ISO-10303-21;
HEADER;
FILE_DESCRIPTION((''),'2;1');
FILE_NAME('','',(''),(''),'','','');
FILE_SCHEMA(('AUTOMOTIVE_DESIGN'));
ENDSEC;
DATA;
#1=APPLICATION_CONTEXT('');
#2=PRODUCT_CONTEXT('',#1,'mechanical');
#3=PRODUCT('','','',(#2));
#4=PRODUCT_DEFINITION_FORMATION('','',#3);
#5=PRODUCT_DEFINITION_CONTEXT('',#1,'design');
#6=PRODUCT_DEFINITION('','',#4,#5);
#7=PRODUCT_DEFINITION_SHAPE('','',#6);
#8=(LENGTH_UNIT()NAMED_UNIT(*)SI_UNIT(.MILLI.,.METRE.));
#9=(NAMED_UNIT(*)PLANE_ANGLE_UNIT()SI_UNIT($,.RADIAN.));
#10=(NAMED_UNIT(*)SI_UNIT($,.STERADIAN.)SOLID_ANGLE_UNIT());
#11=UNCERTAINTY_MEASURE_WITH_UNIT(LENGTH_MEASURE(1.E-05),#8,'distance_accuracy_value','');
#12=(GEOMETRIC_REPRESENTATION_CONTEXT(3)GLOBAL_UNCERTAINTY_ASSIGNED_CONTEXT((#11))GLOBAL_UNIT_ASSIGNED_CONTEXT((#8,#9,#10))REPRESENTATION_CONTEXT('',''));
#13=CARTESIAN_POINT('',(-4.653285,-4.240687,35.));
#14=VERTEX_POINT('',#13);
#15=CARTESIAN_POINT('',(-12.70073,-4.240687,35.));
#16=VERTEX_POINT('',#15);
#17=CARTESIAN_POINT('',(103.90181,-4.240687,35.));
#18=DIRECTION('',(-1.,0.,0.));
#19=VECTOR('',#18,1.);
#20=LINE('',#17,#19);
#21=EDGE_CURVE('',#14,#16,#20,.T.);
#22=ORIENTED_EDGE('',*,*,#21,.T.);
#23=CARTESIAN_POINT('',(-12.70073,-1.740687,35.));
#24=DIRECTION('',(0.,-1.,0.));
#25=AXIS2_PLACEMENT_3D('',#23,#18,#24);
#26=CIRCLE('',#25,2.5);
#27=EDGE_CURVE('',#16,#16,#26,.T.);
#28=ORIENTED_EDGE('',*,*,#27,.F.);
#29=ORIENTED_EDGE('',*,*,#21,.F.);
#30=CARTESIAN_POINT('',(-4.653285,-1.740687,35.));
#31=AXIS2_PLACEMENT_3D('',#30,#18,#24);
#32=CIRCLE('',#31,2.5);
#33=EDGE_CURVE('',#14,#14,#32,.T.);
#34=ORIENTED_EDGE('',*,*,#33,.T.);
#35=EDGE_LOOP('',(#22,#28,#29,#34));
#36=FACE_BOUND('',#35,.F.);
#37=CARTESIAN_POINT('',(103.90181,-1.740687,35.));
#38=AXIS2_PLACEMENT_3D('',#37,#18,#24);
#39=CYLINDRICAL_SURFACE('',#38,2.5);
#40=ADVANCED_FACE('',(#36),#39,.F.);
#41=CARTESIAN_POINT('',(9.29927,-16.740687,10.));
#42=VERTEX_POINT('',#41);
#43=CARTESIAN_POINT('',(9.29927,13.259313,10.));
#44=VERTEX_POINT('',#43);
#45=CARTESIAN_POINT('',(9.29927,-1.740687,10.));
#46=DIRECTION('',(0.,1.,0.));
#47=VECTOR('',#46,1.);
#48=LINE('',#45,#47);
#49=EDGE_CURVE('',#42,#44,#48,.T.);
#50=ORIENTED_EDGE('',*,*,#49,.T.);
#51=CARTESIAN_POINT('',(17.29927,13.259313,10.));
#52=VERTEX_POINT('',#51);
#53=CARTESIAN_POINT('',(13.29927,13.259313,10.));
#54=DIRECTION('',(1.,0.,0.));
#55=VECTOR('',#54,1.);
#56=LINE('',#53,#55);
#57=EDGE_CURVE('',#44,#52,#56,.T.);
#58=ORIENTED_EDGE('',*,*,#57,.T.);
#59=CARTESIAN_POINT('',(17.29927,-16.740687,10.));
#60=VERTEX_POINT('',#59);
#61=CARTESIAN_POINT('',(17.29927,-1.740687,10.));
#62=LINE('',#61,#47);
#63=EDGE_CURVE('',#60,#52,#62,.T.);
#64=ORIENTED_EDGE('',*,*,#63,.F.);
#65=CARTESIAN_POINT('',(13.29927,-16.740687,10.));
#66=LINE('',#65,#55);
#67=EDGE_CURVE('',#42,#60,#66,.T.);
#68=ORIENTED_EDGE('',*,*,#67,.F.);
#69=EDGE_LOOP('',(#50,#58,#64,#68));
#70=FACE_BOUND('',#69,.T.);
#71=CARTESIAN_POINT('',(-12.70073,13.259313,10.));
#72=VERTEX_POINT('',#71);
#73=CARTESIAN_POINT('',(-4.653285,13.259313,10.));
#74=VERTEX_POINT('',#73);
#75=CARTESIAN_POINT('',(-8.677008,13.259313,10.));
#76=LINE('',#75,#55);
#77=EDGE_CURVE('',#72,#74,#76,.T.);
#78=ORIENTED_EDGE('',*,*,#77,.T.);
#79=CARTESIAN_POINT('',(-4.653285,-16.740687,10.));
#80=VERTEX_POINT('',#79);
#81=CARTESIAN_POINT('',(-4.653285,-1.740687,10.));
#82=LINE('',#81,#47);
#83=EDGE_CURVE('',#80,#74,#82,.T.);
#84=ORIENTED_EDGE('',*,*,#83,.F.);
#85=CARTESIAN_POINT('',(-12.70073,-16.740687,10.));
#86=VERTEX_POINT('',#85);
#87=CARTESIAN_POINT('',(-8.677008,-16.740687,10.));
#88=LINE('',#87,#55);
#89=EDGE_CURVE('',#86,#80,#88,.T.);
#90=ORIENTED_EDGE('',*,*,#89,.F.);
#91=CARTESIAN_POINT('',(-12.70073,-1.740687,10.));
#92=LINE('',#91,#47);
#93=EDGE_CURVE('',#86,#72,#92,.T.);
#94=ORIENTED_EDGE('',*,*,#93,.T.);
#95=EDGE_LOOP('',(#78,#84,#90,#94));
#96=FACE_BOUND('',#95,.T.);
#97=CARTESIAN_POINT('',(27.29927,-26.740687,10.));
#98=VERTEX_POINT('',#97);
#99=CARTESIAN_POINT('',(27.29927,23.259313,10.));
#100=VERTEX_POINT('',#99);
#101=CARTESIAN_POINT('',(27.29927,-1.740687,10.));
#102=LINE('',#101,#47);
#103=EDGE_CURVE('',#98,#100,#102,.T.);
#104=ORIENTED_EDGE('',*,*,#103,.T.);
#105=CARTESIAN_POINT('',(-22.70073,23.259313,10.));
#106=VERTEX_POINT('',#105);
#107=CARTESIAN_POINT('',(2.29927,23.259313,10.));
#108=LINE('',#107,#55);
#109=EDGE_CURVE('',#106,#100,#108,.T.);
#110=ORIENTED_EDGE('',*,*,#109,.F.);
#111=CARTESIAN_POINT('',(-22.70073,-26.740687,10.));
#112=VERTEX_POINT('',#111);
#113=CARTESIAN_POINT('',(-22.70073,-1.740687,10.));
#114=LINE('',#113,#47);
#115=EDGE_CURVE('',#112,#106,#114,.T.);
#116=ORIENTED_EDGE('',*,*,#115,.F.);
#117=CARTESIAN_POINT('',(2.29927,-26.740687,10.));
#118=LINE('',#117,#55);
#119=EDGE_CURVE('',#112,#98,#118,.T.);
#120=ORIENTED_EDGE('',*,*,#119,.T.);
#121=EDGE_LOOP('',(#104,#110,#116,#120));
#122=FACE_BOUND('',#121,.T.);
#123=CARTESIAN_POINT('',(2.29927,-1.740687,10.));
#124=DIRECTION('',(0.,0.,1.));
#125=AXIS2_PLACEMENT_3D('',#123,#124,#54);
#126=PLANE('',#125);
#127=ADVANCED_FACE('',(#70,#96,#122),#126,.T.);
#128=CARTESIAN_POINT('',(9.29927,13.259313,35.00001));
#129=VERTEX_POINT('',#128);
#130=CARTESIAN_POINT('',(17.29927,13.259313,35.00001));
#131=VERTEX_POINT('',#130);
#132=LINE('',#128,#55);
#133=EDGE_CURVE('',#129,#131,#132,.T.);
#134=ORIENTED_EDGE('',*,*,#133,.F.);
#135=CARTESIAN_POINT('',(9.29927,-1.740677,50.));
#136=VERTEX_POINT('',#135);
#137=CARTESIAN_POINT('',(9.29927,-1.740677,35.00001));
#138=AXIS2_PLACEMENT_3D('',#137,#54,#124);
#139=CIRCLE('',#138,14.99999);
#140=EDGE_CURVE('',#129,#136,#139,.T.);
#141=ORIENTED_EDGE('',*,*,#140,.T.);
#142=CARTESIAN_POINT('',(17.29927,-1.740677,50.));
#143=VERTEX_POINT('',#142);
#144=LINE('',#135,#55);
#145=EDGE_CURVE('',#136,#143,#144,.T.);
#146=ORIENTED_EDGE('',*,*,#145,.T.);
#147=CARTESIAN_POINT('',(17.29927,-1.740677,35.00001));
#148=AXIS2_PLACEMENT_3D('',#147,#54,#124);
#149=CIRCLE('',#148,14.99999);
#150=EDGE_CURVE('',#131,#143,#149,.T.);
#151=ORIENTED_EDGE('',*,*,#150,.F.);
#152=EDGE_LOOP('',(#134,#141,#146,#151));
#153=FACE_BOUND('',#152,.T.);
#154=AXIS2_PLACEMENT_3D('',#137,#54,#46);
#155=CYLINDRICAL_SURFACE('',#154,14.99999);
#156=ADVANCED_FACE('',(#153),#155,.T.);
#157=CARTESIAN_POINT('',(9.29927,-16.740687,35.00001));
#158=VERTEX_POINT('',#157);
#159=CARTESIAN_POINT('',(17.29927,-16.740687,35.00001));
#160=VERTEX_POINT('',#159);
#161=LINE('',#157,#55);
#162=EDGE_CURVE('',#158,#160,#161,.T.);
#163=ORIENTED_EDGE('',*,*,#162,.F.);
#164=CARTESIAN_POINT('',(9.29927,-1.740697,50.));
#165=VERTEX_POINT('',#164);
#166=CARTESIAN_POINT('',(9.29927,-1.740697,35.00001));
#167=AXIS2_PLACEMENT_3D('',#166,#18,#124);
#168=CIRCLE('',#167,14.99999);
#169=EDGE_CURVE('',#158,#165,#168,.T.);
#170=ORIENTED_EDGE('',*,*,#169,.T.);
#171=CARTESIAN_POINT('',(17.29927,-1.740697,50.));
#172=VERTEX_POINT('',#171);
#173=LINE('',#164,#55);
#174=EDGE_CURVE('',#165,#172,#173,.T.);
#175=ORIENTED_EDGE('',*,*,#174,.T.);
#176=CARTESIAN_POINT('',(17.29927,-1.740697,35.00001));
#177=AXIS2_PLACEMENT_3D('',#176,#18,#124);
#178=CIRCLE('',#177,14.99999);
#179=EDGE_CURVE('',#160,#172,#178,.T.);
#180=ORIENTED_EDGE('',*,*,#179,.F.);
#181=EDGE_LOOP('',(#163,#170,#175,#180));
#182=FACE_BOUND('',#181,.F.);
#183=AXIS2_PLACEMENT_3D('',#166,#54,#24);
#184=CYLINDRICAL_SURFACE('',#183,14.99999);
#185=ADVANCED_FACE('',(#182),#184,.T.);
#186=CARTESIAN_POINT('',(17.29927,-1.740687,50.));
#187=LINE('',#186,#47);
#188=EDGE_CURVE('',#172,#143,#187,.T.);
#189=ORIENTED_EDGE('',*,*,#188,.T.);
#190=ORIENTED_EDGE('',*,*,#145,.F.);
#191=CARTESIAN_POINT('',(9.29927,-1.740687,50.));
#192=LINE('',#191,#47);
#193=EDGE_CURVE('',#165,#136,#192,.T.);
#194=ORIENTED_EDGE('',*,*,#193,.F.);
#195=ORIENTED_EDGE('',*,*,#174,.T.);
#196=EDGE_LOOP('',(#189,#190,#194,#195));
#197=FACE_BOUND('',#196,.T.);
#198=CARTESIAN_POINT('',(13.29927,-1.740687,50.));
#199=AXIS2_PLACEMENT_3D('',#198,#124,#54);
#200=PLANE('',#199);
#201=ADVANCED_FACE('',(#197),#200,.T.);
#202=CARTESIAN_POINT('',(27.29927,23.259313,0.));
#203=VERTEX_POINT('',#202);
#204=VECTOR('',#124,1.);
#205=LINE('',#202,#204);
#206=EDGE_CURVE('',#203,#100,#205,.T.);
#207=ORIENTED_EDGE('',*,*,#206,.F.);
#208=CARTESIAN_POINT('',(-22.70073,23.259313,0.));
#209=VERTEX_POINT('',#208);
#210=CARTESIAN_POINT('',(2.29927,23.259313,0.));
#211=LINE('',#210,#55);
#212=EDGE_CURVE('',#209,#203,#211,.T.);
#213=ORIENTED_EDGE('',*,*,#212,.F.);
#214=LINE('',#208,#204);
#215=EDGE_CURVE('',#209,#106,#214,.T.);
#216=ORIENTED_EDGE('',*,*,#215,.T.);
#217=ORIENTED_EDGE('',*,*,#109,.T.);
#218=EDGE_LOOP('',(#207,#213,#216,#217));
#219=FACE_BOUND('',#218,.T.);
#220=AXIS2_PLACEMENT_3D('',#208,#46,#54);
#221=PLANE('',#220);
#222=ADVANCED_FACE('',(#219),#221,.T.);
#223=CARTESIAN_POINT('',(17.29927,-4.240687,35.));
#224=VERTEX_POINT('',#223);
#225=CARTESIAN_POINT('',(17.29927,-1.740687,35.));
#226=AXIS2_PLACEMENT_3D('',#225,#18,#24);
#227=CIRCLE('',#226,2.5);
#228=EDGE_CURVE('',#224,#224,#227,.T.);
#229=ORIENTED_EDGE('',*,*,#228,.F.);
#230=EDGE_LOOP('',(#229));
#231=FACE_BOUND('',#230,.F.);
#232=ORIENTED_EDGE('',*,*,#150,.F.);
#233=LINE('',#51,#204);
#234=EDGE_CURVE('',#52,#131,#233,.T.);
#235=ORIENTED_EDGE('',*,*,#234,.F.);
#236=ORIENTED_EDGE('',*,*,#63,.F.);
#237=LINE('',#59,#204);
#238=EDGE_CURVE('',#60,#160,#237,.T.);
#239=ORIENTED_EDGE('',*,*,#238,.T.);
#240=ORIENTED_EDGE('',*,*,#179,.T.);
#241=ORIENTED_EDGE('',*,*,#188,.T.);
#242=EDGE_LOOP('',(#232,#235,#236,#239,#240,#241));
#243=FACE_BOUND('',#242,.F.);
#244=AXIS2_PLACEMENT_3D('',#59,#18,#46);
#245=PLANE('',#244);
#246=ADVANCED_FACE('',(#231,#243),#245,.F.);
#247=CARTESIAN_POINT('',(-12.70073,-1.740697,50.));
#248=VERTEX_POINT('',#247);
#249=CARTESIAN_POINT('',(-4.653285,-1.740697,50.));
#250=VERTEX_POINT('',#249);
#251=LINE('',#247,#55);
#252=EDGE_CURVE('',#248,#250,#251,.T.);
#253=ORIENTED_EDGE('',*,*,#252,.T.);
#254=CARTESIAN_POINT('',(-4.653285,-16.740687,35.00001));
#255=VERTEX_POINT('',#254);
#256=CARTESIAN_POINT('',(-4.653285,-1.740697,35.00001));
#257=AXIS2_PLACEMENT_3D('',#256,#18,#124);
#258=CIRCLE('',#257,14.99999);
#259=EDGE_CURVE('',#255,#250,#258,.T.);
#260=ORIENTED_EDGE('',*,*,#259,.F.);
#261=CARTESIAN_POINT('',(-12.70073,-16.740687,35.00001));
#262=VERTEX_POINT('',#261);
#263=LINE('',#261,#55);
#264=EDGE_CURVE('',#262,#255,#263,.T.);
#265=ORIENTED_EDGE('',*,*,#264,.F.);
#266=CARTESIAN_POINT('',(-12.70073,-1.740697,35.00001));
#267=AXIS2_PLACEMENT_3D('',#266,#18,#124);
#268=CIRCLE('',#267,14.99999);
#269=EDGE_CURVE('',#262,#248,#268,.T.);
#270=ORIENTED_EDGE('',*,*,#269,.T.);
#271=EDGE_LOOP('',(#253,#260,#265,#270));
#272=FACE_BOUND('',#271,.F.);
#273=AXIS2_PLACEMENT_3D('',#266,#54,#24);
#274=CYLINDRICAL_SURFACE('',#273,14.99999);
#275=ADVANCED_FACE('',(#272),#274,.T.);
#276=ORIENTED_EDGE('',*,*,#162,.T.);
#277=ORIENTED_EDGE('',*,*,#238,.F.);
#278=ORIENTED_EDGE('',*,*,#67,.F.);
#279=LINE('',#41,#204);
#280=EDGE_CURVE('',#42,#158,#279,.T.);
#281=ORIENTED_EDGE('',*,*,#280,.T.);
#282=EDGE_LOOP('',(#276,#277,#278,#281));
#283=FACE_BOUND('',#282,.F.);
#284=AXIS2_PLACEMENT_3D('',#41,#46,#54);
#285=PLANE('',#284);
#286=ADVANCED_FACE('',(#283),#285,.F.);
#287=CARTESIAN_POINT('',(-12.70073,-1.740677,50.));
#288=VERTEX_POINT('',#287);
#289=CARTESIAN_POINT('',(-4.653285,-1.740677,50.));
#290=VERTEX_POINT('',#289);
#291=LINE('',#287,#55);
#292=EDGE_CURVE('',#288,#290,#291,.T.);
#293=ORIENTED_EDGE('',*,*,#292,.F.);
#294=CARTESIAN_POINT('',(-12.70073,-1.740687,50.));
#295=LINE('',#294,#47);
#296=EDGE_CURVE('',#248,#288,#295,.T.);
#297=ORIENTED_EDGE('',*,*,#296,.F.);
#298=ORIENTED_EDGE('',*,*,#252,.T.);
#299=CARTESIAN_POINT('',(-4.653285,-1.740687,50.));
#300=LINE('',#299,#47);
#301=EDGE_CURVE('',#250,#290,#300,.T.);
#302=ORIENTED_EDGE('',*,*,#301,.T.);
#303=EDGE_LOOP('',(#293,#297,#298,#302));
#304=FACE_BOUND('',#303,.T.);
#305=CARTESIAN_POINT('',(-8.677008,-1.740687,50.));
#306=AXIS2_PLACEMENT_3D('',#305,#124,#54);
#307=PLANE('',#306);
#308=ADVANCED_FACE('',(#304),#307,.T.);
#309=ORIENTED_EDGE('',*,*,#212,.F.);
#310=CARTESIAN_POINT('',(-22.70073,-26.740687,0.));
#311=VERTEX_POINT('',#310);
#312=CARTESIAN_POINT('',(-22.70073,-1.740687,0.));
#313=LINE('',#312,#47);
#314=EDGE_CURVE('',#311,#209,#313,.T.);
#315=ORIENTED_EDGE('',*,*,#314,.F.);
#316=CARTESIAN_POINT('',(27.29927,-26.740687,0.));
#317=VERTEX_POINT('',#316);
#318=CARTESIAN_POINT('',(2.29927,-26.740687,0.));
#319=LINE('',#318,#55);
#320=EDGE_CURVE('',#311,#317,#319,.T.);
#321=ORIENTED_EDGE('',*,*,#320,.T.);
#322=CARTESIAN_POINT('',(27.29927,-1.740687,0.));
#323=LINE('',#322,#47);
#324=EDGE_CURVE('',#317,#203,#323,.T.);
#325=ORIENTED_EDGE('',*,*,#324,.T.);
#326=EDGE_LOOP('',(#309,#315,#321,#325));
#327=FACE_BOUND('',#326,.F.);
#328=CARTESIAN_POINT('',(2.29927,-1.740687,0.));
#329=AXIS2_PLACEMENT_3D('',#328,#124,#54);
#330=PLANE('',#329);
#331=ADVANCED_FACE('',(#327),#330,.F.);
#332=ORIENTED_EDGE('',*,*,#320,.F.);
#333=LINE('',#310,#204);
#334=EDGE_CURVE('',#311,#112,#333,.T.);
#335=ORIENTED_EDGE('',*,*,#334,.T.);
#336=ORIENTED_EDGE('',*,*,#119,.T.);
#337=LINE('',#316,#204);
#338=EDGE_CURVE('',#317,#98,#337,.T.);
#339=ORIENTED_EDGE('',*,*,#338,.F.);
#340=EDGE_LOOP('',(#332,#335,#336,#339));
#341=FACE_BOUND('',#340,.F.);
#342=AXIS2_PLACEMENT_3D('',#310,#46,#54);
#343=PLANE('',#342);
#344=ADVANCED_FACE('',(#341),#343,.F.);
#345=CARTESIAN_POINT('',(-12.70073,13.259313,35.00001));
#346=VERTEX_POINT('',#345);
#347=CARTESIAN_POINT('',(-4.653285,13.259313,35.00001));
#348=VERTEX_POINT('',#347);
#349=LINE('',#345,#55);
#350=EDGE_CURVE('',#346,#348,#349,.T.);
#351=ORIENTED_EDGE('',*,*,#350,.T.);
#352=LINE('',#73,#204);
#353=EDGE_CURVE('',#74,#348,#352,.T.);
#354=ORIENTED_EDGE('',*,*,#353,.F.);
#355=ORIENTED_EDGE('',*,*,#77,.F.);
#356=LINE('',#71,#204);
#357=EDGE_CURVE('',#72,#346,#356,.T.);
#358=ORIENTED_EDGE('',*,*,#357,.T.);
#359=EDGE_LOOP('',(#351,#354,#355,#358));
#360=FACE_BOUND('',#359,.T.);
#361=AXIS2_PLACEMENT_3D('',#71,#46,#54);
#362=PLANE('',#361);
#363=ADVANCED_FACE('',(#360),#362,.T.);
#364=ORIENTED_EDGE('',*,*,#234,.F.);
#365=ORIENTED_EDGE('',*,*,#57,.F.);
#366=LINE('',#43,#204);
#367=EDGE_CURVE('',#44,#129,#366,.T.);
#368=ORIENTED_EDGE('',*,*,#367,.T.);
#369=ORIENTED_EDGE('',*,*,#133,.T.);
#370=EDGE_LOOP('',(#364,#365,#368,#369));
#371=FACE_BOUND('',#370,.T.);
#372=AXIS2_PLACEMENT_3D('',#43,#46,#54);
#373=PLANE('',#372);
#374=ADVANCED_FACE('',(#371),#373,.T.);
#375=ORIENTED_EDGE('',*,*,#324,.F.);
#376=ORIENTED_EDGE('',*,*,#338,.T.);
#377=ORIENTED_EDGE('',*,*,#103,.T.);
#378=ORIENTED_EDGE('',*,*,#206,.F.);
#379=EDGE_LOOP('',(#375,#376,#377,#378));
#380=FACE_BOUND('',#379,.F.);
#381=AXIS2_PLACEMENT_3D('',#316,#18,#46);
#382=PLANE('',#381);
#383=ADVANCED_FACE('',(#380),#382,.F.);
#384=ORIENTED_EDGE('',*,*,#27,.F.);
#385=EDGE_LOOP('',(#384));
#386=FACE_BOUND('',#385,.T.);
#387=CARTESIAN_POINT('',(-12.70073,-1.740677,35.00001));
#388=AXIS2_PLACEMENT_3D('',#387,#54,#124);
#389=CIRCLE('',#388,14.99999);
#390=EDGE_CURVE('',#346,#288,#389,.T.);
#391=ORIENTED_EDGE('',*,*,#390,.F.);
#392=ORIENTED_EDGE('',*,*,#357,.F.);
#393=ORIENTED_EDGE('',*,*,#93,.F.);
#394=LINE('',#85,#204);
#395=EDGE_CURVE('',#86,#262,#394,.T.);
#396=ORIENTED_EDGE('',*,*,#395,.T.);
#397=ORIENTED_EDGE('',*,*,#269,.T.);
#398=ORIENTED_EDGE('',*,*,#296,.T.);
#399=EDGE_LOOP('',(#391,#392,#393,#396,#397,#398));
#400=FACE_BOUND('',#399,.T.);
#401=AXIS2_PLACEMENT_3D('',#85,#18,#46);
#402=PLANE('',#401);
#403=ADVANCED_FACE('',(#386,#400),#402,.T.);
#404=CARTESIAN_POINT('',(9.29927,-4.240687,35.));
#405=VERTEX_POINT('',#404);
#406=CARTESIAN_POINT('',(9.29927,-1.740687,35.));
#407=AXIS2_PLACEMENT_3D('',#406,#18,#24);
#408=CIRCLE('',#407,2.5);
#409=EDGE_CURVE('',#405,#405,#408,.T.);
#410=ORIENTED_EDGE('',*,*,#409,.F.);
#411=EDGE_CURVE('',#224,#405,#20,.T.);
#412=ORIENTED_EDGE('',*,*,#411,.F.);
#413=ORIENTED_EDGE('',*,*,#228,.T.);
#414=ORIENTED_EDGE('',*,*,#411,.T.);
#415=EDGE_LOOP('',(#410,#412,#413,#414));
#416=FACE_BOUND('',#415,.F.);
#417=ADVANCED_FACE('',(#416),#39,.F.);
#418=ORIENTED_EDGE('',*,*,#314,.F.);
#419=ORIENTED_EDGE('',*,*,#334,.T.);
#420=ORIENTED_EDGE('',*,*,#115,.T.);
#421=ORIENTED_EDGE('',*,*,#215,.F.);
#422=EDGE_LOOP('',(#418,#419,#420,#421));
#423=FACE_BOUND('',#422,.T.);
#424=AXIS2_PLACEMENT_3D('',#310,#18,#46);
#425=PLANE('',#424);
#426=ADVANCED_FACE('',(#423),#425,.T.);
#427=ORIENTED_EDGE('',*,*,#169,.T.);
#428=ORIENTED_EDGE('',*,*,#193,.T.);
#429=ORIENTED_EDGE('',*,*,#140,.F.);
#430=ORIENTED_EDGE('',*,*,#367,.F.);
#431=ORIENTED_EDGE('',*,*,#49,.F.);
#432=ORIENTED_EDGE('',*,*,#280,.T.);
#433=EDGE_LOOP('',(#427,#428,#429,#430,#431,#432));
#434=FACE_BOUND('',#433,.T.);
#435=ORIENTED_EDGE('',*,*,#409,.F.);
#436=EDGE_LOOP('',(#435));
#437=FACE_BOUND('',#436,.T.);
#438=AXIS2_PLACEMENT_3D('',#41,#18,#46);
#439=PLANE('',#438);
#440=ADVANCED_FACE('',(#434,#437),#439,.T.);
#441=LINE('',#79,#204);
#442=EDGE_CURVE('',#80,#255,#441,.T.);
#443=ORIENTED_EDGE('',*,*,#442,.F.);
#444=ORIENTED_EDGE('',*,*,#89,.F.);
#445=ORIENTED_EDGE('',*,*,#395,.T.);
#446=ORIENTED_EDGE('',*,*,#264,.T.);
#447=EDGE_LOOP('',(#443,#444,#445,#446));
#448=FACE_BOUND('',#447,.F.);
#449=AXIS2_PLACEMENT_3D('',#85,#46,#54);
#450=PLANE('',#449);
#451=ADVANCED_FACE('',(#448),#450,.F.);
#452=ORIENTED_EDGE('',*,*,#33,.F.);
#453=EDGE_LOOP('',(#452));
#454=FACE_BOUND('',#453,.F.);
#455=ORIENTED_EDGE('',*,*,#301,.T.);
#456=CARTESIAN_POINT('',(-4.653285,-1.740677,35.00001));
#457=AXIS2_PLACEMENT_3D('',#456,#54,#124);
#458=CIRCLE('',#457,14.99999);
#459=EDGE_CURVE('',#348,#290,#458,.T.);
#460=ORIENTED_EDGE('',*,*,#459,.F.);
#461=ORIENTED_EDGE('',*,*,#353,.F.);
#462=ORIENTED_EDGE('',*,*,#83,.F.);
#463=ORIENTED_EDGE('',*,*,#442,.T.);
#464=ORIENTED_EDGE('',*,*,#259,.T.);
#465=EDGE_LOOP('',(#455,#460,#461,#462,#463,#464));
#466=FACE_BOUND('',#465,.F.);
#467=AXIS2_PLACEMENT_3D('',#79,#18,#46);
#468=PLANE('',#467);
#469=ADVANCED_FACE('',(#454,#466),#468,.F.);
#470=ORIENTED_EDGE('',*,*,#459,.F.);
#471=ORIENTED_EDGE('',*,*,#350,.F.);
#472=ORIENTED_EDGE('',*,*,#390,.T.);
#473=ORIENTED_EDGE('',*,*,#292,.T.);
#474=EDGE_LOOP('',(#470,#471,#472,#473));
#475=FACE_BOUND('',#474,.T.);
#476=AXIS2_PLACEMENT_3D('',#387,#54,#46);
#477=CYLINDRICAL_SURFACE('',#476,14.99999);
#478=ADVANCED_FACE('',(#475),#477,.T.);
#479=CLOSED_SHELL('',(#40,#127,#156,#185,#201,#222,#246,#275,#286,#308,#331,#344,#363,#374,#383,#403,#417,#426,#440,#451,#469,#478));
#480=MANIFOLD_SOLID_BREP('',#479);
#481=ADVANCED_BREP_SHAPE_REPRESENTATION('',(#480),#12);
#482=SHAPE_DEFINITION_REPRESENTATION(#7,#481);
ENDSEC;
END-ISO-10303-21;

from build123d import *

# Parameters (mm, degrees)
F0_W     = 50
F0_H     = 50
F1_DEPTH = 10
F2_W     = 8.0474452116
F2_H     = 30
F2_W_2   = 8
F3_DEPTH = 40
F4_R     = 14.99999
F6_D     = 5


# Not quite as in the source:
# - a fillet or chamfer is up to 0.001 mm smaller than in the source, because OpenCascade refuses the exact size


with BuildPart() as f1:
    # F0 (on Top) → F1 (new body)
    with BuildSketch(Plane.XY):
        with Locations((2.2992696613, -1.7406867517)):
            Rectangle(F0_W, F0_H)
    extrude(amount=F1_DEPTH)

    # F2 (on face) → F3 (join)
    with BuildSketch(Plane.XY.offset(10)):
        with Locations((-8.6770077329, -1.7406867517)):
            Rectangle(F2_W, F2_H)
        with Locations((13.2992696613, -1.7406867517)):
            Rectangle(F2_W_2, F2_H)
    extrude(amount=F3_DEPTH)

    # F4 (radius 15 in the source; OpenCascade refuses exactly that, so slightly less here)
    f4_edges = [f1.edges().sort_by_distance(p)[0] for p in [
        (-8.677008, -16.740687, 50),
        (13.29927, -16.740687, 50),
        (-8.677008, 13.259313, 50),
        (13.29927, 13.259313, 50),
    ]]
    fillet(f4_edges, radius=F4_R)

    # F6 (through all)
    with Locations(Plane.YZ.offset(17.2992696613)):
        with Locations((-1.7406867517, 35)):
            Hole(F6_D / 2)


solid = f1.part
